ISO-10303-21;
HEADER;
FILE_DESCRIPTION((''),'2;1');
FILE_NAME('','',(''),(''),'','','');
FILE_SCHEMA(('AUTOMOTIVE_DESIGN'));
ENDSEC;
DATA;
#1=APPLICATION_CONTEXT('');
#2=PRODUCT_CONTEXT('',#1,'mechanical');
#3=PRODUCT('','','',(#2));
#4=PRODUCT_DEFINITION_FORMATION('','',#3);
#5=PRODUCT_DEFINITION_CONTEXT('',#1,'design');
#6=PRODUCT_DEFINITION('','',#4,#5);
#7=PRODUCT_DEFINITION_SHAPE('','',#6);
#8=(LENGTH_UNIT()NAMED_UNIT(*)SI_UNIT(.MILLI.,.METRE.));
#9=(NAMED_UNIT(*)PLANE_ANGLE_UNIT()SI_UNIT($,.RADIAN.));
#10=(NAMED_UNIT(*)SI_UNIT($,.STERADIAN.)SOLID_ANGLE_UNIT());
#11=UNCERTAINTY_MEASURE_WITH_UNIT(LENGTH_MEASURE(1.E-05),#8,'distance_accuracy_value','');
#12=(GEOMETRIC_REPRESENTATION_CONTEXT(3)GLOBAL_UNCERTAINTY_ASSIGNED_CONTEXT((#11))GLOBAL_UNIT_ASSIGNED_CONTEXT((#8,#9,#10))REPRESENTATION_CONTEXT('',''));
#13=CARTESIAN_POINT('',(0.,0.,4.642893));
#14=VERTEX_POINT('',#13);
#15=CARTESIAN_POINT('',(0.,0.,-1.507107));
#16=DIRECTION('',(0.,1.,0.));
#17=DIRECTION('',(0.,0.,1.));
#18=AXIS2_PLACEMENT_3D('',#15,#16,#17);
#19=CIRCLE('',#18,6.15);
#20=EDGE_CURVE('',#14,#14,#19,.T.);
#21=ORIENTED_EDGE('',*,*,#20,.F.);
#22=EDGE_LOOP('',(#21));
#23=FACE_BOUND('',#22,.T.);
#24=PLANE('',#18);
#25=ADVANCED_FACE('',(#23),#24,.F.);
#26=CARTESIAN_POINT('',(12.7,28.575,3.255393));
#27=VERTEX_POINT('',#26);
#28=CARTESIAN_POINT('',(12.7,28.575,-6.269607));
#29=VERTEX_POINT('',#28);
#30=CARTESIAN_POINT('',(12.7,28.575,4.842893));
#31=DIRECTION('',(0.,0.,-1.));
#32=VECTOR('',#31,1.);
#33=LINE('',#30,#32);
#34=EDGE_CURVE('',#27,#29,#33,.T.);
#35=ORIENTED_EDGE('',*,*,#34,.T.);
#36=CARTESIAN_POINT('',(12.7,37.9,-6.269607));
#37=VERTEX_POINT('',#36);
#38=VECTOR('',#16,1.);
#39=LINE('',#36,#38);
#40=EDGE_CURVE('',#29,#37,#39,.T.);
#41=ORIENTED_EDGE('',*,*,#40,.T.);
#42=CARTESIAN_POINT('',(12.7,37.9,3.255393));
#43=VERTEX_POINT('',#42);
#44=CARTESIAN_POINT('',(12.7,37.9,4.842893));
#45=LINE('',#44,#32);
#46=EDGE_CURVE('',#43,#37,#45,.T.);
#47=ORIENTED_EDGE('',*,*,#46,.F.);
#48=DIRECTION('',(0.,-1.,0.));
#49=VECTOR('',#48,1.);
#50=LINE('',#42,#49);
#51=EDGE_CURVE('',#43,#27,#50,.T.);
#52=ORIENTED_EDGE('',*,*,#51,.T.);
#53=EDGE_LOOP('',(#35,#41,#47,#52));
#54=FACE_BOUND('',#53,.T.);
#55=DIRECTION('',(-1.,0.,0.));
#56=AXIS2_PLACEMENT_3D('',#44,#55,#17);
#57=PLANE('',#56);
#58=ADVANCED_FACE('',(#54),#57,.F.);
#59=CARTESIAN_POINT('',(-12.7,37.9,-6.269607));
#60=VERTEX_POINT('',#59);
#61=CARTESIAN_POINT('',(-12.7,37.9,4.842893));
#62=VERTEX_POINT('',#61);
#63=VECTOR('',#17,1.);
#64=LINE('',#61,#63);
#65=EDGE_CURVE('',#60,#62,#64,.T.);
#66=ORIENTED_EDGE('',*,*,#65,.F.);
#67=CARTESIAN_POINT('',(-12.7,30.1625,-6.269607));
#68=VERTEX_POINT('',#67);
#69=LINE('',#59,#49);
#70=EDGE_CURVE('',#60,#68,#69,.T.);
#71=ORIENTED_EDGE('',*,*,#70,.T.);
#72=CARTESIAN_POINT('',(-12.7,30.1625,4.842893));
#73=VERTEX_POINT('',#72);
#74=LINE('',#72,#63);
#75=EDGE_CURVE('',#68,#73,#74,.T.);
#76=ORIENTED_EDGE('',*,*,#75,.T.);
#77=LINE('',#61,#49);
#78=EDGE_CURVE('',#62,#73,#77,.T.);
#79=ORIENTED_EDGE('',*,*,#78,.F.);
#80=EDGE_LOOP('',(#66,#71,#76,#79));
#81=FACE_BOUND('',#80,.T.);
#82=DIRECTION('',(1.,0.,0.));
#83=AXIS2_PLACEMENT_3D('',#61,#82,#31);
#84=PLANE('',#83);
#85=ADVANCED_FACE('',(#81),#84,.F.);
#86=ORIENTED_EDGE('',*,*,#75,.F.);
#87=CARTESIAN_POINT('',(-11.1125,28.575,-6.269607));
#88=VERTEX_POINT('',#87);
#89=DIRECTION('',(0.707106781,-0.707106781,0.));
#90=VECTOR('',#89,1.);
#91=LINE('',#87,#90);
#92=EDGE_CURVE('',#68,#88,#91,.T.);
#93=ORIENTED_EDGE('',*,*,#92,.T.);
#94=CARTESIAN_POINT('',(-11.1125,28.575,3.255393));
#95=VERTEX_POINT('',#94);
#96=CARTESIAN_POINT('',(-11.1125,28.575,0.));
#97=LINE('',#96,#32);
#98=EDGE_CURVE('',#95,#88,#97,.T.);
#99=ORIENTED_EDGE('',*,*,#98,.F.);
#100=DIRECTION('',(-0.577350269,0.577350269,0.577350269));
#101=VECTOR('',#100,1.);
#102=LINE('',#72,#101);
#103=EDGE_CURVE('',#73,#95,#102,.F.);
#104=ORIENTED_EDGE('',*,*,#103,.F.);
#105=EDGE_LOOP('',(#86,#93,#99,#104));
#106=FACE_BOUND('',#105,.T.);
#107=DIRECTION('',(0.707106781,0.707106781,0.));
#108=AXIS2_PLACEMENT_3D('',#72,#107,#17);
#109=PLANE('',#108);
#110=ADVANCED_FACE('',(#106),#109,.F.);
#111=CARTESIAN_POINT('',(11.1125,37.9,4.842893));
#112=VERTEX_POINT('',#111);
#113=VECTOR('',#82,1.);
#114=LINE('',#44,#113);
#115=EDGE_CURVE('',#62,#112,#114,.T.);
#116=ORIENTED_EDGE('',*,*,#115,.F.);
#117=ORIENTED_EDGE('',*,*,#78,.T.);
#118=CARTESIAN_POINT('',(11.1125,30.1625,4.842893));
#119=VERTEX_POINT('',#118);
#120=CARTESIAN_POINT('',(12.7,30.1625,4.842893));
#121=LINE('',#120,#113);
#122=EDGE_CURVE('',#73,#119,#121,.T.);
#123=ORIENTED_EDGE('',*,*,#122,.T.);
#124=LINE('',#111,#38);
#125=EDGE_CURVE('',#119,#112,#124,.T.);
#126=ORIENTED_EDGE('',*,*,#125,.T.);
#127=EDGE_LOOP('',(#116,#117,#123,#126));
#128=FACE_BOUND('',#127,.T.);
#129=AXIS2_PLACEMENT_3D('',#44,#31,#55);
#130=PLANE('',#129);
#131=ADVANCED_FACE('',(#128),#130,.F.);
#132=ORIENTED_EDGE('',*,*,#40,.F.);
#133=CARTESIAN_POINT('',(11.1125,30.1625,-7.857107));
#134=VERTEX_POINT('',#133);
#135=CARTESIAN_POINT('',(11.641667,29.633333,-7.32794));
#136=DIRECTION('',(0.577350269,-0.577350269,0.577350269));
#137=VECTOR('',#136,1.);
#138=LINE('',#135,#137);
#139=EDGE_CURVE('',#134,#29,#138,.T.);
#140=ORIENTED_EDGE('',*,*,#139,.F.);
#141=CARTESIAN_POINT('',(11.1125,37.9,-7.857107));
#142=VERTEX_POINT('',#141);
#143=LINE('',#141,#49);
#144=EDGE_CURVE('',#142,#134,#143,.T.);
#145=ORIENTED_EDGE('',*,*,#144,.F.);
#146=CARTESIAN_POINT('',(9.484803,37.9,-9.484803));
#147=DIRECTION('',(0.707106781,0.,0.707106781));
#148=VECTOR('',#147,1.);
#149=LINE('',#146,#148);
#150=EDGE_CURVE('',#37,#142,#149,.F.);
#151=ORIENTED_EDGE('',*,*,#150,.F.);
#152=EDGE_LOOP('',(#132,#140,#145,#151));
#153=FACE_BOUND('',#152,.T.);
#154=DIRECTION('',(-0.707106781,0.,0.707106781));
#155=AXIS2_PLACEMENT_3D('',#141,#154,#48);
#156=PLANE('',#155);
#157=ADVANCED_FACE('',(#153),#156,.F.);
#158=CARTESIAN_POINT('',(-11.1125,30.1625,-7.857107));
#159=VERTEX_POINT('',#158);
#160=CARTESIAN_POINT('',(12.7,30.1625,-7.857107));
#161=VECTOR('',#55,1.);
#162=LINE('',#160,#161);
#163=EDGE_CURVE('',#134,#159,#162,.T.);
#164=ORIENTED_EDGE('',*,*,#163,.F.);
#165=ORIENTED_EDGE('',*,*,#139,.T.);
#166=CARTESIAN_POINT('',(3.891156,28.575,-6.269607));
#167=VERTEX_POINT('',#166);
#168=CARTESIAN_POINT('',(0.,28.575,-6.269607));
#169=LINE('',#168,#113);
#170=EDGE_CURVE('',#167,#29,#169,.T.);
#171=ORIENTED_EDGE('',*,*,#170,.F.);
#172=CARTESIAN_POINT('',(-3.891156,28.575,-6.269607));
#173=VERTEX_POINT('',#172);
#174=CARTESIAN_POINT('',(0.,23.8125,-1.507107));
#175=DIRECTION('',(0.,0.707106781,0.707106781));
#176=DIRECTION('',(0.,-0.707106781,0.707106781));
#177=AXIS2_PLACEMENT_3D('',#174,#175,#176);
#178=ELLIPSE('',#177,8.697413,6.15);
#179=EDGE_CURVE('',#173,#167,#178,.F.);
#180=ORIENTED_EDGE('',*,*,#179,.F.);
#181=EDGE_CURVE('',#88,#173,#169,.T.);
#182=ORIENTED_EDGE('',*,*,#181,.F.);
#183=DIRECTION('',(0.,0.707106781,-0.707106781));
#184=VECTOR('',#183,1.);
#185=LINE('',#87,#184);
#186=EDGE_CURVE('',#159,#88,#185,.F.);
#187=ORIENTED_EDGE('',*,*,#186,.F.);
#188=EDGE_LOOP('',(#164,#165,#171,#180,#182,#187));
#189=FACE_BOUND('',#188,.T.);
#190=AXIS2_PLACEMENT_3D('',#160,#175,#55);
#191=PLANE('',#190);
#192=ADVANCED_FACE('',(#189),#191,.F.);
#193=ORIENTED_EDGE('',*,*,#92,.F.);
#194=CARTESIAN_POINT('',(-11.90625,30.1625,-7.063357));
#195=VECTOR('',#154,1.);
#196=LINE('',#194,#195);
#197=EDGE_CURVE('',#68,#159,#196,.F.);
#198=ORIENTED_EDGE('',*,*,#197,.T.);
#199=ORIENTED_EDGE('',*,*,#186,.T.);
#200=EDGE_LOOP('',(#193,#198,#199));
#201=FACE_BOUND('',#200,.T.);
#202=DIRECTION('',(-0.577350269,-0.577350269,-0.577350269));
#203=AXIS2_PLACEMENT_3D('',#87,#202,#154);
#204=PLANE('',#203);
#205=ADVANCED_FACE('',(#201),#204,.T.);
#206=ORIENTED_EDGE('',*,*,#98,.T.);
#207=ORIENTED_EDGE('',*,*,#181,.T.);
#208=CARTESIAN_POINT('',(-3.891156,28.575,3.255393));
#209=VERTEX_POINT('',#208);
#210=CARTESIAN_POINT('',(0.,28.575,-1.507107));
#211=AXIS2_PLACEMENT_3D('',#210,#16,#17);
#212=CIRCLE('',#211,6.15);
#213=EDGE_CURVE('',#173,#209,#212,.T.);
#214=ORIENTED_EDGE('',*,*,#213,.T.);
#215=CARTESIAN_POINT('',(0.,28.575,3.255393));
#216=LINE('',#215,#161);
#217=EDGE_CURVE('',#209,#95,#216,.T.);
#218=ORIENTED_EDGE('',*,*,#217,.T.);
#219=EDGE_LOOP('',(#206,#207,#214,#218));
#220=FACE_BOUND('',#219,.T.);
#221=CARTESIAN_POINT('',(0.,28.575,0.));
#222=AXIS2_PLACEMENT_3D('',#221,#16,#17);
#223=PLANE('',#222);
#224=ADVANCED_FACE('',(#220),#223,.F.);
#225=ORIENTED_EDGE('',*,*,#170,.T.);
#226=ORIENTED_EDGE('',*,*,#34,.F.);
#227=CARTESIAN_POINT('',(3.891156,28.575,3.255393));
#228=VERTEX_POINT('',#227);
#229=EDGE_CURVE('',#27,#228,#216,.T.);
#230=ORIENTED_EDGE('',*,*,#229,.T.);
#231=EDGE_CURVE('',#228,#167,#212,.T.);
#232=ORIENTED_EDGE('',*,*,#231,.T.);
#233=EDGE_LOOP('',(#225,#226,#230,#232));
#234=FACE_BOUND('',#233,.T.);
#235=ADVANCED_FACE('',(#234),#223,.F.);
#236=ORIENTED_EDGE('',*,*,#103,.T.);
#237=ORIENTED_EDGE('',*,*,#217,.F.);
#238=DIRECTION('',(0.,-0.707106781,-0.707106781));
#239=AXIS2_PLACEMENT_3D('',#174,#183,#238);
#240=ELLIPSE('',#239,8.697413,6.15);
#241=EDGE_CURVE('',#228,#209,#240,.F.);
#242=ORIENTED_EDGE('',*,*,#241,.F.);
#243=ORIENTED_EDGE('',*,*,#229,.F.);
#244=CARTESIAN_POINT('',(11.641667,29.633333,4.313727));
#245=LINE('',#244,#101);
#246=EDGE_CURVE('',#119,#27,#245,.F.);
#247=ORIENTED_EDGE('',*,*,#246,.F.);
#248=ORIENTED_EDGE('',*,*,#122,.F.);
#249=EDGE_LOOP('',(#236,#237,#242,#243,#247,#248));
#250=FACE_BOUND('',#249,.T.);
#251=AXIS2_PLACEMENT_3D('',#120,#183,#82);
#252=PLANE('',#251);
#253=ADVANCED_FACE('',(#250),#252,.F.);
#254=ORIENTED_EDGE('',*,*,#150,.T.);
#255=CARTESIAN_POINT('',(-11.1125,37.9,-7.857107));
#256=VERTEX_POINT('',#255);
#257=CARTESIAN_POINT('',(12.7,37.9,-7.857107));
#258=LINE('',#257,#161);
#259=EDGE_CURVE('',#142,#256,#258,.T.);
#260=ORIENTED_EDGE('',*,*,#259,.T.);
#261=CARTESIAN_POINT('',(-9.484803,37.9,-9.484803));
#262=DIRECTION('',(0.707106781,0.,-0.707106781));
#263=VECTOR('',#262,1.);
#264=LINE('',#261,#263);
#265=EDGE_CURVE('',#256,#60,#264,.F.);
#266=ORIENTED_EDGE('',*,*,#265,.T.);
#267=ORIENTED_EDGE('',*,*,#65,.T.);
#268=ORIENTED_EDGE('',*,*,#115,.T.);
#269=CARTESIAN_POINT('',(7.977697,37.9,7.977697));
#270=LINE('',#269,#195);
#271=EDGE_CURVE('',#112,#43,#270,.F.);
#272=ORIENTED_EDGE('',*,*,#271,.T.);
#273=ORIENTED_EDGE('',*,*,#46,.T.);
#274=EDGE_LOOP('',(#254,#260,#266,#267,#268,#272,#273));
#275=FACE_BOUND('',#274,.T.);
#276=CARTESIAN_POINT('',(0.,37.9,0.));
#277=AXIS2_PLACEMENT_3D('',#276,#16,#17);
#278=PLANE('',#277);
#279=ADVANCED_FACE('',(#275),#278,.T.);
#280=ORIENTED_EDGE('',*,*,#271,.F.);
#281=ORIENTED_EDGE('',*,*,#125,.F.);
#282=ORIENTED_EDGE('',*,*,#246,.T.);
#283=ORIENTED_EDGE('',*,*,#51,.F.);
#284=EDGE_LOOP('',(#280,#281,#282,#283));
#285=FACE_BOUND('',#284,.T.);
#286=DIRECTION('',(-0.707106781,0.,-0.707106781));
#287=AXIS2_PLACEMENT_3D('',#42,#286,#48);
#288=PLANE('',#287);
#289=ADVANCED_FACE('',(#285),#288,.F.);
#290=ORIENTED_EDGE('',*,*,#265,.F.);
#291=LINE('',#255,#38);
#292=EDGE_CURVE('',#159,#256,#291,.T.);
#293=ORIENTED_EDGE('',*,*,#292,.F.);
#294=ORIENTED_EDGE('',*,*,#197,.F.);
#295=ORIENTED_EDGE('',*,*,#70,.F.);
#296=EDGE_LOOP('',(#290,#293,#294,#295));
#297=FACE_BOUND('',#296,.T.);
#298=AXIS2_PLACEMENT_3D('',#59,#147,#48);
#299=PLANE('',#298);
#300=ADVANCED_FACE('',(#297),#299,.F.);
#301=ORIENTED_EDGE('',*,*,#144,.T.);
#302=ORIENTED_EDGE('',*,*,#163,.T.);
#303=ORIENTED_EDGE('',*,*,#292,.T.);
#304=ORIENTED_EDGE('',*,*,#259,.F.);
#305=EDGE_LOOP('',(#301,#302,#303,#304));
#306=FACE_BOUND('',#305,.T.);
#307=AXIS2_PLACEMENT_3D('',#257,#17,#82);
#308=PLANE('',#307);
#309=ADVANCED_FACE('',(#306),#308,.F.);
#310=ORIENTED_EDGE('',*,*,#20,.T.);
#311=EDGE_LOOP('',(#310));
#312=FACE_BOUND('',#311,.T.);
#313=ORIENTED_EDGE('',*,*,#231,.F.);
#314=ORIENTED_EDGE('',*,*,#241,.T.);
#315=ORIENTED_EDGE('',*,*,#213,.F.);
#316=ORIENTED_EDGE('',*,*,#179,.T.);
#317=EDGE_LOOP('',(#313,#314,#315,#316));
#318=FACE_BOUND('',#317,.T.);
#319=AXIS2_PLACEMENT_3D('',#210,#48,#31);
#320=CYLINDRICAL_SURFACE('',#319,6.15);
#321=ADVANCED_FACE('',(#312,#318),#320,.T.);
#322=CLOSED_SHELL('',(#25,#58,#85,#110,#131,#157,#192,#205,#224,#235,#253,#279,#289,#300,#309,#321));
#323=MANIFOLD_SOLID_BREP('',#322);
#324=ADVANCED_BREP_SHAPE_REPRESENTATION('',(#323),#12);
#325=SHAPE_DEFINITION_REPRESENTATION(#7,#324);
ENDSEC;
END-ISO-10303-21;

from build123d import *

# Parameters (mm, degrees)
SKETCH1_R           = 6.15
BOSS_EXTRUDE1_DEPTH = 28.575
SKETCH3_W           = 25.4
SKETCH3_H           = 12.7
BOSS_EXTRUDE2_DEPTH = 9.325


with BuildPart() as part:
    # Sketch1 → Boss-Extrude1 (new body)
    with BuildSketch(Plane(origin=(0, 0, 0), x_dir=(1, 0, 0), z_dir=(0, 1, 0))):
        with Locations(Location((0, 1.507106584, 0), (0, 0, 270))):
            Circle(SKETCH1_R)
    extrude(amount=BOSS_EXTRUDE1_DEPTH)

    # Sketch3 → Boss-Extrude2 (add)
    with BuildSketch(Plane(origin=(0, 28.575, 0), x_dir=(1, 0, 0), z_dir=(0, 1, 0))):
        with Locations((0, 1.507106584)):
            Rectangle(SKETCH3_W, SKETCH3_H)
    extrude(amount=BOSS_EXTRUDE2_DEPTH)

    # Chamfer1
    # the kernel refuses this chamfer: 1.5875 mm, written as the material it takes off along each edge
    with BuildSketch(Plane(origin=(-11.641666667, 29.633333333, -6.798773251), x_dir=(0.7071067811865478, -0.707106781186547, 0), z_dir=(-0.5773502691896255, -0.5773502691896262, -0.5773502691896257))) as chamfer1_piece_1:
        Polygon((-1.122532015, 0.648094161), (1.122532015, 0.648094161), (0, -1.296188322), align=None)
    extrude(amount=2.016395815, mode=Mode.SUBTRACT)
    with BuildSketch(Plane(origin=(-12.7, 28.575, 8.925440159), x_dir=(-0.027495876610586785, 0.9996219169112966, 0), z_dir=(0, 0, -1))) as chamfer1_piece_2:
        with BuildLine():
            Line((1.633018697, 0), (-0.089768608, 1.630549497))
            Line((-0.089768608, 1.630549497), (-0.121506604, 1.629676503))
            ThreePointArc((-0.121506604, 1.629676503), (-0.054180148, 0.815019055), (-0.031737996, -0.000872994))
            Line((-0.031737996, -0.000872994), (0.000872994, -0.031737996))
            ThreePointArc((0.000872994, -0.031737996), (0.816765043, -0.009295844), (1.633891691, -0.031737996))
            Line((1.633891691, -0.031737996), (1.633018697, 0))
        make_face()
    extrude(amount=20.865093487, mode=Mode.SUBTRACT)
    with BuildSketch(Plane(origin=(-12.7, 24.492453257, -7.857106584), x_dir=(-0.02749587661058674, 0, 0.9996219169112966), z_dir=(0, 1, 0))) as chamfer1_piece_3:
        with BuildLine():
            Line((1.633018697, 0), (-0.089768608, 1.630549497))
            Line((-0.089768608, 1.630549497), (-0.121506604, 1.629676503))
            ThreePointArc((-0.121506604, 1.629676503), (-0.054180148, 0.815019055), (-0.031737996, -0.000872994))
            Line((-0.031737996, -0.000872994), (0.000872994, -0.031737996))
            ThreePointArc((0.000872994, -0.031737996), (0.816765043, -0.009295844), (1.633891691, -0.031737996))
            Line((1.633891691, -0.031737996), (1.633018697, 0))
        make_face()
    extrude(amount=17.490093487, mode=Mode.SUBTRACT)
    with BuildSketch(Plane(origin=(16.782546743, 28.575, 4.842893416), x_dir=(0, 0.9996219169112966, 0.02749587661058624), z_dir=(-1, 0, 0))) as chamfer1_piece_4_section:
        with BuildLine():
            Line((1.633018697, 0), (-0.089768608, 1.630549497))
            Line((-0.089768608, 1.630549497), (-0.121506604, 1.629676503))
            ThreePointArc((-0.121506604, 1.629676503), (-0.054180148, 0.815019055), (-0.031737996, -0.000872994))
            Line((-0.031737996, -0.000872994), (0.000872994, -0.031737996))
            ThreePointArc((0.000872994, -0.031737996), (0.816765043, -0.009295844), (1.633891691, -0.031737996))
            Line((1.633891691, -0.031737996), (1.633018697, 0))
        make_face()
    chamfer1_piece_4 = extrude(amount=33.565093487, mode=Mode.PRIVATE)
    chamfer1_piece_4 = chamfer1_piece_4 - Plane(origin=(0, 29.903258734, -1.507106584), x_dir=(0, 0, 1), z_dir=(0, -1, 0)) * Cylinder(6.15, 74, mode=Mode.PRIVATE)
    add(chamfer1_piece_4, mode=Mode.SUBTRACT)
    with BuildSketch(Plane(origin=(12.7, 24.492453257, 4.842893416), x_dir=(-0.9996219169112968, 0, 0.027495876610586185), z_dir=(0, 1, 0)), Plane(origin=(12.7, 24.492453257, -7.857106584), x_dir=(0.027495876610586754, 0, 0.9996219169112966), z_dir=(0, 1, 0))) as chamfer1_piece_5:
        with BuildLine():
            Line((1.633018697, 0), (-0.089768608, -1.630549497))
            Line((-0.089768608, -1.630549497), (-0.121506604, -1.629676503))
            ThreePointArc((-0.121506604, -1.629676503), (-0.054180148, -0.815019055), (-0.031737996, 0.000872994))
            Line((-0.031737996, 0.000872994), (0.000872994, 0.031737996))
            ThreePointArc((0.000872994, 0.031737996), (0.816765043, 0.009295844), (1.633891691, 0.031737996))
            Line((1.633891691, 0.031737996), (1.633018697, 0))
        make_face()
    extrude(amount=17.490093487, mode=Mode.SUBTRACT)
    with BuildSketch(Plane(origin=(-16.782546743, 28.575, -7.857106584), x_dir=(0, -0.027495876610585654, 0.9996219169112968), z_dir=(1, 0, 0))) as chamfer1_piece_6_section:
        with BuildLine():
            Line((1.633018697, 0), (-0.089768608, -1.630549497))
            Line((-0.089768608, -1.630549497), (-0.121506604, -1.629676503))
            ThreePointArc((-0.121506604, -1.629676503), (-0.054180148, -0.815019055), (-0.031737996, 0.000872994))
            Line((-0.031737996, 0.000872994), (0.000872994, 0.031737996))
            ThreePointArc((0.000872994, 0.031737996), (0.816765043, 0.009295844), (1.633891691, 0.031737996))
            Line((1.633891691, 0.031737996), (1.633018697, 0))
        make_face()
    chamfer1_piece_6 = extrude(amount=33.565093487, mode=Mode.PRIVATE)
    chamfer1_piece_6 = chamfer1_piece_6 - Plane(origin=(0, 28.785057027, -1.507106584), x_dir=(0, 0, 1), z_dir=(0, -1, 0)) * Cylinder(6.15, 74, mode=Mode.PRIVATE)
    add(chamfer1_piece_6, mode=Mode.SUBTRACT)


solid = part.part
